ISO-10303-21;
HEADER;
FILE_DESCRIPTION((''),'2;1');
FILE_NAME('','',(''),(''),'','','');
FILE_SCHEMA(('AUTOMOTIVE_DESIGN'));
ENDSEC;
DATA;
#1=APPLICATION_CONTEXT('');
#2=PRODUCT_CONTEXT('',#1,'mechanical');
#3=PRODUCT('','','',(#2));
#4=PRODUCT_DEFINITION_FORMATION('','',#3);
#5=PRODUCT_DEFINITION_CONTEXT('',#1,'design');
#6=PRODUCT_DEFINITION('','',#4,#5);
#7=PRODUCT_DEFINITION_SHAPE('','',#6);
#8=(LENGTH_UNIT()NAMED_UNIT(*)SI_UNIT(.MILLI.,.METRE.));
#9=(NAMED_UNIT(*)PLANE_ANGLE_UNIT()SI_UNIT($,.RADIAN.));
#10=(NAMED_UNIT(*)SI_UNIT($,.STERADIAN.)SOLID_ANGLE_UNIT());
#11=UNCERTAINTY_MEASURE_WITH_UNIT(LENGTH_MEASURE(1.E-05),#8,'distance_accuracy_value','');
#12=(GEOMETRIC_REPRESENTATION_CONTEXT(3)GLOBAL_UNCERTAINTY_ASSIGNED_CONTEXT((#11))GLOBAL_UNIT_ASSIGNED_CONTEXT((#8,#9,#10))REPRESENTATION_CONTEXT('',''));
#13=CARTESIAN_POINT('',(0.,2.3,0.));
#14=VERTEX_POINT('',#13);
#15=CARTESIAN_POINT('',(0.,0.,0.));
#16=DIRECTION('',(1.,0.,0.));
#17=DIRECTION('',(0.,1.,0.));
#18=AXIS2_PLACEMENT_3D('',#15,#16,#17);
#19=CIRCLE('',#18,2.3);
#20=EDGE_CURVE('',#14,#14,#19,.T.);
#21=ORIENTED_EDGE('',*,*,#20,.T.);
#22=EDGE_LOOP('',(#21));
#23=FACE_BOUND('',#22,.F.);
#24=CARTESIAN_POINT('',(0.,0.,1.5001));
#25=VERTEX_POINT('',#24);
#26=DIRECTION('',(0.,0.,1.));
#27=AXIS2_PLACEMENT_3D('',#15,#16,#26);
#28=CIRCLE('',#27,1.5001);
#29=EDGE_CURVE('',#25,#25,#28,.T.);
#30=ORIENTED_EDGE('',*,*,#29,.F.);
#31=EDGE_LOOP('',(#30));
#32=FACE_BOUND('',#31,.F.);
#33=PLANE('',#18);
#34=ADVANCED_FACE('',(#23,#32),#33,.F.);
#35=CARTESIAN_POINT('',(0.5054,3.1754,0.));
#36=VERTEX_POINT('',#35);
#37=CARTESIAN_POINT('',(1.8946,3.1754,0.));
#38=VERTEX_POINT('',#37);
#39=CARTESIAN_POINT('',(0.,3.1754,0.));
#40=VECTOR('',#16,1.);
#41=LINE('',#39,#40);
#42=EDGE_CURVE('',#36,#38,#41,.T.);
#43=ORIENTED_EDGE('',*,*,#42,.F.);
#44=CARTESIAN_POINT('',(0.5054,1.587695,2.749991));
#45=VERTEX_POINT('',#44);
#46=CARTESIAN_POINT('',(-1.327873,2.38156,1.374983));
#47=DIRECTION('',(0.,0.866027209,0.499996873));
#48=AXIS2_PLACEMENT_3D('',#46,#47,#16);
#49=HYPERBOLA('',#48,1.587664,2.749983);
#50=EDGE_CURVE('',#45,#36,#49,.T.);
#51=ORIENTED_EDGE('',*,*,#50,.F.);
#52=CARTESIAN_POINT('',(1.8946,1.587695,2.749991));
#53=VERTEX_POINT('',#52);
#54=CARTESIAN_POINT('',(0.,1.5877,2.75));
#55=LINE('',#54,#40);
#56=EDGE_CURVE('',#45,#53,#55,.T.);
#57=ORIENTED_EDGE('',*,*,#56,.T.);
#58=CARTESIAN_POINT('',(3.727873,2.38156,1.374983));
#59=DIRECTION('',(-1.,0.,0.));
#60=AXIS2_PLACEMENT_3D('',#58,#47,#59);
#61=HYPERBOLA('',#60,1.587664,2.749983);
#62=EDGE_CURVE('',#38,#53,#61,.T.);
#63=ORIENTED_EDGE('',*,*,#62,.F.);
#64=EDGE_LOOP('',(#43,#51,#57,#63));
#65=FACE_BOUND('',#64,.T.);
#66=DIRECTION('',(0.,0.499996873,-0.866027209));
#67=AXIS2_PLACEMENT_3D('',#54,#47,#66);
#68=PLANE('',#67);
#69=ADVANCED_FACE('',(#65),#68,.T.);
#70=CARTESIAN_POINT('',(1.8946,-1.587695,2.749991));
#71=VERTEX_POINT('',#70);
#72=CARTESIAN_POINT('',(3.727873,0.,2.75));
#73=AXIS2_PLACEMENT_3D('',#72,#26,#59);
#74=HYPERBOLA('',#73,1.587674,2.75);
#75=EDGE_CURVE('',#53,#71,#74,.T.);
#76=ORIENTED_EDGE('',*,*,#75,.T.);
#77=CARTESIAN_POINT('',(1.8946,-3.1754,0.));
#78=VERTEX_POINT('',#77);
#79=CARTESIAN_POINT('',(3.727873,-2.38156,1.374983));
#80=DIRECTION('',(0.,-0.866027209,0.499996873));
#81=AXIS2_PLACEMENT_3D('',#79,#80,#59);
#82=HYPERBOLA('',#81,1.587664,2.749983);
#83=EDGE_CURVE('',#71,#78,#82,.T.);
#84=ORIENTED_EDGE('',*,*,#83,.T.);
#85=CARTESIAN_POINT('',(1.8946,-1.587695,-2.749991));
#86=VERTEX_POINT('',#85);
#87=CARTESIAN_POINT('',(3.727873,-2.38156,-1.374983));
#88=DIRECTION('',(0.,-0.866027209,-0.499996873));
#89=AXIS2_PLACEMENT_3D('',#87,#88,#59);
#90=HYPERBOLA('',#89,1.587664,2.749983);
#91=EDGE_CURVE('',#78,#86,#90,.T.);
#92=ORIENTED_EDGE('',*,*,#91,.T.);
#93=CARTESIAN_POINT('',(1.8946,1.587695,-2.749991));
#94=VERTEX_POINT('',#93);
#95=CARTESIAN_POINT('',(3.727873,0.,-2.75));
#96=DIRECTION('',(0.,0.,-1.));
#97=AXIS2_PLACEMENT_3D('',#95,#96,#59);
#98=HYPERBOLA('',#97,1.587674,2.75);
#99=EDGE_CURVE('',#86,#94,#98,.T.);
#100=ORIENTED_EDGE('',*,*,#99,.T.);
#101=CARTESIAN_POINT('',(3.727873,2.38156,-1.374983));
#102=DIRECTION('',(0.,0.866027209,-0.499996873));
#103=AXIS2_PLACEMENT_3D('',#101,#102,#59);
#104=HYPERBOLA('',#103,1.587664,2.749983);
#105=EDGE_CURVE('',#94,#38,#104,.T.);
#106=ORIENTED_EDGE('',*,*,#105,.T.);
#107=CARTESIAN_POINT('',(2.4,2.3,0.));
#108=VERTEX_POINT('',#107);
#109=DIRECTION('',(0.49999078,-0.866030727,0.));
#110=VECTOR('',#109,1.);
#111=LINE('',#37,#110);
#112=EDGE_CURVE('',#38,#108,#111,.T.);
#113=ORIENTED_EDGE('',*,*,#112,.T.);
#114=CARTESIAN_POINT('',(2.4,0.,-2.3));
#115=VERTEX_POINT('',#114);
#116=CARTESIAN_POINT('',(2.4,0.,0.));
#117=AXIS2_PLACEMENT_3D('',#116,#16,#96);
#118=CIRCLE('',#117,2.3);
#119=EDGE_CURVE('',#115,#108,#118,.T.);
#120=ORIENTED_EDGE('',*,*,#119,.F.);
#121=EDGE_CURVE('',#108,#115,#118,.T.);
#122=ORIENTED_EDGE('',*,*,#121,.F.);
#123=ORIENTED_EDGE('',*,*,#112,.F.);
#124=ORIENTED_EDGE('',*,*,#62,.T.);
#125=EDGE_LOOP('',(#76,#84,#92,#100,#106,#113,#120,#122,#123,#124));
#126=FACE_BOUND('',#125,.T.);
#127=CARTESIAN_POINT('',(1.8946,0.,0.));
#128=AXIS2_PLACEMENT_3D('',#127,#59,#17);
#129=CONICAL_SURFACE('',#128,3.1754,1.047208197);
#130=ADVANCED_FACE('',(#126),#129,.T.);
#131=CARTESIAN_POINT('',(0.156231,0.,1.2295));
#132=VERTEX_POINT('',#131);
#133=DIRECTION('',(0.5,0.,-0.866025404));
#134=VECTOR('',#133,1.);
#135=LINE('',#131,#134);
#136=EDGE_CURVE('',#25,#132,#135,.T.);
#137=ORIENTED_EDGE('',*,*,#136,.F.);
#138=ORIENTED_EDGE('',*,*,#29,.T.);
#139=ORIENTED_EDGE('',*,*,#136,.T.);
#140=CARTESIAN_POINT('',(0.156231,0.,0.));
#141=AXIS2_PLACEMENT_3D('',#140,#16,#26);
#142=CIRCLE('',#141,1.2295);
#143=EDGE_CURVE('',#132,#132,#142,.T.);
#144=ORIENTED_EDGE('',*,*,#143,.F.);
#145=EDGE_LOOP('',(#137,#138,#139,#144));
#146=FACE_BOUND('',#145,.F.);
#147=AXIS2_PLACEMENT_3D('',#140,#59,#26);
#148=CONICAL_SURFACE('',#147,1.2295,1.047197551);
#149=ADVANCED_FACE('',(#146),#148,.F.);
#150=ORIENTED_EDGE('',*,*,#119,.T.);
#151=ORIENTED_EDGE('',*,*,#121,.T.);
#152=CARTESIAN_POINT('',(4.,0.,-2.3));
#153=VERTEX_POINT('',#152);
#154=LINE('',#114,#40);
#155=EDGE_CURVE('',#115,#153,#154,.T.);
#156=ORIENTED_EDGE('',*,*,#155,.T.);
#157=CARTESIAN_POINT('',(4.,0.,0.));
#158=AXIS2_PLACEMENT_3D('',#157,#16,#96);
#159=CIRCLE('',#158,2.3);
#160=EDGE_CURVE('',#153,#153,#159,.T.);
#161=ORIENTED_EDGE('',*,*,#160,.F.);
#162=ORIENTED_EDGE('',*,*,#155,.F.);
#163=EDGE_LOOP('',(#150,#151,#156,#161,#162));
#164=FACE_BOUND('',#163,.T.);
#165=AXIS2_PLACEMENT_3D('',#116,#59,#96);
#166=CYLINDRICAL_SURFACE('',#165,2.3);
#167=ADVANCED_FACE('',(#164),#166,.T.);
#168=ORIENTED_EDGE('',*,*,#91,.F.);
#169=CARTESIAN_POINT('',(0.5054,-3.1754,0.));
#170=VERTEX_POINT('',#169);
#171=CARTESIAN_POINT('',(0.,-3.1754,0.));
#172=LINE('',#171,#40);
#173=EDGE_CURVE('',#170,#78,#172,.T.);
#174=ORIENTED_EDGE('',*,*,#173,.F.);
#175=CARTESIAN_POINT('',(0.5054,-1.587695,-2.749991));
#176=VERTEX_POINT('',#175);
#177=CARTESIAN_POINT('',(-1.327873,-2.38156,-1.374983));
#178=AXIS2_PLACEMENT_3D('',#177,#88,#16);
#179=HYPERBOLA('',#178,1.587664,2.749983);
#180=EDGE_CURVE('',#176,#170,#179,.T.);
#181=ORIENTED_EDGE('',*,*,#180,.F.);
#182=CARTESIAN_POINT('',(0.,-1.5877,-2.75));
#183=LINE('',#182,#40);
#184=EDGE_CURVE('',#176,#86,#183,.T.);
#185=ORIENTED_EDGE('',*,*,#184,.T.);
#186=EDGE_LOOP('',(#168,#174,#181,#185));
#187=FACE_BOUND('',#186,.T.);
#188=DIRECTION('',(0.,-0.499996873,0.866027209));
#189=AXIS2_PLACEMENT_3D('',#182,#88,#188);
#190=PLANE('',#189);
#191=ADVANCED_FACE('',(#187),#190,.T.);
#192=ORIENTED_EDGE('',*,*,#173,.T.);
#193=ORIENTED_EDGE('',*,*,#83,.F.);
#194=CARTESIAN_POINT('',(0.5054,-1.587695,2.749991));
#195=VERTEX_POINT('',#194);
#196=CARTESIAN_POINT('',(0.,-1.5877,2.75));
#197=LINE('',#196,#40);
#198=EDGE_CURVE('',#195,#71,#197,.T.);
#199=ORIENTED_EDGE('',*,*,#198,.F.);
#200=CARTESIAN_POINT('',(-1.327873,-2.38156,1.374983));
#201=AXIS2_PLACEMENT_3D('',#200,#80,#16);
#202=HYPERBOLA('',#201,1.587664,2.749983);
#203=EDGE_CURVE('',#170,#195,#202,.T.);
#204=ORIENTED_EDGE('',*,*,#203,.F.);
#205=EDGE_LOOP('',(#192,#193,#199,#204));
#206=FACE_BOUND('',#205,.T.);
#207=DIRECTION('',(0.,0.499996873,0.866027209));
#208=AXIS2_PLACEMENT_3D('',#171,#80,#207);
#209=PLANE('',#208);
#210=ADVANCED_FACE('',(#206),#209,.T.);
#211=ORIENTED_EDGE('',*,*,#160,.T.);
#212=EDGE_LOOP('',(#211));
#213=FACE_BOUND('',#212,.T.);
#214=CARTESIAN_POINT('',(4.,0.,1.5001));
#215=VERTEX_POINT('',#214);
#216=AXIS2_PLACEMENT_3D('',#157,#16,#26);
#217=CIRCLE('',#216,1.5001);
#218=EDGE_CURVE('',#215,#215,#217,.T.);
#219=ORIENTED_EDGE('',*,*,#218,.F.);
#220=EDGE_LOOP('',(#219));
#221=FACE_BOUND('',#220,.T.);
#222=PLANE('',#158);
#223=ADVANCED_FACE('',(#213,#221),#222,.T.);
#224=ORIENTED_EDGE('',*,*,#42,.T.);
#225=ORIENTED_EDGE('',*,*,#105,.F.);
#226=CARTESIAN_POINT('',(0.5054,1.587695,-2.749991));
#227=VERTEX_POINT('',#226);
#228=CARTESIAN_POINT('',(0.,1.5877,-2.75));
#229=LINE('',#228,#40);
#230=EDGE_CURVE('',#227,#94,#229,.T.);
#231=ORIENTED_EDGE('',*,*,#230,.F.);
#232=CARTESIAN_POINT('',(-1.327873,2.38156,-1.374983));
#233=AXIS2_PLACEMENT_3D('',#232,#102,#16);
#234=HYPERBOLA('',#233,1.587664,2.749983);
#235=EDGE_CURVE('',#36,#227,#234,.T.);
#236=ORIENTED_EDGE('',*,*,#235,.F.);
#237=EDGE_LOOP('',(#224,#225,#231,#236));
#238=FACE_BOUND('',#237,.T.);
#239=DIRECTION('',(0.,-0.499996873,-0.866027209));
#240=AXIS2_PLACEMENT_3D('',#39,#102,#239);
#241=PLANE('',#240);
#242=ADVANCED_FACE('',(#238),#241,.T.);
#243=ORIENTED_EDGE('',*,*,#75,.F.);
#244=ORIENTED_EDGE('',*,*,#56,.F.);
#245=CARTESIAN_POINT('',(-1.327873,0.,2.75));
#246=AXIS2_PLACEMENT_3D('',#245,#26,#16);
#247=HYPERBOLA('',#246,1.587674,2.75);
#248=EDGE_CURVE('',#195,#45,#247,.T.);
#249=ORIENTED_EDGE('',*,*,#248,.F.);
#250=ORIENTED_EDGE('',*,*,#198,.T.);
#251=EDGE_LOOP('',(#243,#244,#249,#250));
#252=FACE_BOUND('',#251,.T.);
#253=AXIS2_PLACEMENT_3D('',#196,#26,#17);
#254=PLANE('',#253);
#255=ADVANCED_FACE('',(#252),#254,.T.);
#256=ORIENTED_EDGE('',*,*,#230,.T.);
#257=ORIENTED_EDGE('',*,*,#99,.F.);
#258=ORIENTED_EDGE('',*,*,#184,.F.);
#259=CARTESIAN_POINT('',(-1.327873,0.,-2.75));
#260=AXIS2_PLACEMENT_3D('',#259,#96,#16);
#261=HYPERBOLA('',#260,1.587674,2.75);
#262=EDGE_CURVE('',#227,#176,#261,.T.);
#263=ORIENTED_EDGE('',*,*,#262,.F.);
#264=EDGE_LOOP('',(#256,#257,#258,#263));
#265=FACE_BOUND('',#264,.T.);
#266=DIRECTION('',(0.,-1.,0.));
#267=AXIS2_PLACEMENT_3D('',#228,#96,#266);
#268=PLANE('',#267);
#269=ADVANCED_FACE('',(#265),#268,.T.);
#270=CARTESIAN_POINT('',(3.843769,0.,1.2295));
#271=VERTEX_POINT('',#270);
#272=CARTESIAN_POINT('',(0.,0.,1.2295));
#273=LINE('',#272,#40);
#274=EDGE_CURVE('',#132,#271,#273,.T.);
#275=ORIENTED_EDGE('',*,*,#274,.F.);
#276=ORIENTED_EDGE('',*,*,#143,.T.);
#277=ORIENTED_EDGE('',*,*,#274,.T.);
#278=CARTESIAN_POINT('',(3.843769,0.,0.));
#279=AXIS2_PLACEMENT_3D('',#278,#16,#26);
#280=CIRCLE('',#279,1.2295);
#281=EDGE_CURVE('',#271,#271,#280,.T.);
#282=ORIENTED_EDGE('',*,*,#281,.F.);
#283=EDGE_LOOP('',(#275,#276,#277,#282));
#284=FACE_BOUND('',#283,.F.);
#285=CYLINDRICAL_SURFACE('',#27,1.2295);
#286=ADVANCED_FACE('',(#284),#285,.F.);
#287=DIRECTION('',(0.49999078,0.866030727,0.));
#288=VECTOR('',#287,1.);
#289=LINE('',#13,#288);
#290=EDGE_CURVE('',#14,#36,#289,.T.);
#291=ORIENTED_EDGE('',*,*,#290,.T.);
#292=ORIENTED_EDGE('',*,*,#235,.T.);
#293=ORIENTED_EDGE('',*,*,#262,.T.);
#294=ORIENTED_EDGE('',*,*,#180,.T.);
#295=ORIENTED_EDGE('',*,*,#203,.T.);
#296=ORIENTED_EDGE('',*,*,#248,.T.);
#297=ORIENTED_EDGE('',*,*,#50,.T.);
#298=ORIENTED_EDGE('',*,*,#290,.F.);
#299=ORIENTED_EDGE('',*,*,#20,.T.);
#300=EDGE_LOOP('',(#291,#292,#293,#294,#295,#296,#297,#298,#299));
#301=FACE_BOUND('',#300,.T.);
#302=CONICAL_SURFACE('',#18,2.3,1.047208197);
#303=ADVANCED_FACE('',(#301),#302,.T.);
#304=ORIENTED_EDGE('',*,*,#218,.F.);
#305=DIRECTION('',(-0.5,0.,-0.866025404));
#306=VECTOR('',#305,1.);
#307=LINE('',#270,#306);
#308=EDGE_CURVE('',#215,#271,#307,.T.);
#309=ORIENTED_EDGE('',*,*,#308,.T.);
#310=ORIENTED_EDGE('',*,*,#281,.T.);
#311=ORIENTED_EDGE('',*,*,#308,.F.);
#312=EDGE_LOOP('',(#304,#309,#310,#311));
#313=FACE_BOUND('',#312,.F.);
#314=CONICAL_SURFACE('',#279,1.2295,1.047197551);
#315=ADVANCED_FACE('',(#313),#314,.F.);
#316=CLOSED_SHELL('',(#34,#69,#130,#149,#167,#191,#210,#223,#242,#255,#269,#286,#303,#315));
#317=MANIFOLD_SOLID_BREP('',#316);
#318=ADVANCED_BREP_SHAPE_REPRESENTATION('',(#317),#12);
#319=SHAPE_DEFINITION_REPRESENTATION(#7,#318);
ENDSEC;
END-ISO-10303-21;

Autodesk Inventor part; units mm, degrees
ref_plane "YZ Plane" through (0, 0, 0) normal (1, 0, 0) x (0, 1, 0)
ref_plane "XZ Plane" through (0, 0, 0) normal (0, 1, 0) x (-1, 0, 0)
sketch "Sketch1" plane through (0, 0, 0) normal (1, 0, 0) x (0, 1, 0)
  line L0 (1.5877, -2.75) -> (-1.5877, -2.75)
  line L1 (-1.5877, -2.75) -> (-3.1754, 0)
  line L2 (-3.1754, 0) -> (-1.5877, 2.75)
  line L3 (-1.5877, 2.75) -> (1.5877, 2.75)
  line L4 (1.5877, 2.75) -> (3.1754, 0)
  line L5 (3.1754, 0) -> (1.5877, -2.75)
  point P0 (0, 0)
  point P1 (0, 0)
  dimension "d0" = 6.3509
extrude "Body" add sketch "Sketch1" along normal blind 2.4
sketch "Sketch2" plane through (2.4, 0, 0) normal (1, 0, 0) x (0, 0, -1)
  circle A0 centre (0, 0) radius 2.3
  dimension "d7" = 4.6
extrude "Ring" add sketch "Sketch2" along normal blind 1.6
sketch "Sketch3" plane through (0, 0, 0) normal (0, 0, 1) x (1, 0, 0)
  line L0 (0, 1.5877) -> (0, 3.1754) projected
  line L1 (0, 3.1754) -> (2.4, 3.1754) projected
  line L2 (2.4, 1.5877) -> (2.4, 3.1754) projected
  line L3 (-0.48, 0) -> (2.88, 0) projected
  line L4 (0, 2.3) -> (0.5054, 3.1754)
  line L5 (1.8946, 3.1754) -> (2.4, 2.3)
  dimension "d3" = 30
  dimension "d4" = 30
  dimension "d5" = 4.6
  dimension "d6" = 4.6
revolve "Chamfer1" cut sketch "Sketch3" angle 360 about axis through (-10, 0, 0) along (1, 0, 0)
sketch "Sketch4" plane through (0, 0, 0) normal (-1, 0, 0) x (0, 0, 1)
  line L0 (0, -4.4456) -> (0, 4.4456) projected
  line L1 (-3.85, 0) -> (3.85, 0) projected
  point P0 (0, 0)
hole "Thread" at (0, 0, 0) direction (1, 0, 0) diameter 2.459 end through all thread size "M3x0.5" class "6H" standard "ISO Metric profile"
chamfer "Chamfer2" distance 0.2706 angle 30 1 edges at (0, 0, -1.2295) measured on face at (0, 1.9179, -0.2329)
chamfer "Chamfer3" distance 0.2706 angle 30 1 edges at (4, 0, -1.2295) measured on face at (4, -0.2816, -1.909)
ref_plane "Work Plane1" through (9.305, 0, 0) normal (0, 0, 1) x (-1, 0, 0)
equation "\"d0\" = 1.1547 * SW"
equation "\"d1\" = KOH1"
equation "\"d7\" = SD2"
equation "\"d8\" = KOH - KOH1"
equation "\"d3\" = ANG1"
equation "\"d4\" = ANG2"
equation "\"d5\" = SW0"
equation "\"d6\" = SW01"
equation "\"d10\" = -0.5 * GD1 + 0.5 * NND"
equation "\"d46\" = -0.5 * GD1 + 0.5 * NND"
equation "\"d12\" = -0.5 * GD1 + 0.5 * NND"
equation "\"d47\" = -0.5 * GD1 + 0.5 * NND"
equation "\"ANG1\" = 30deg"
equation "\"ANG2\" = 30deg"
equation "\"NND\" = 3"
equation "\"KOH1\" = 2.4"
equation "\"KOH\" = 4"
equation "\"SW\" = 5.5"
equation "\"SW0\" = 4.6"
equation "\"SW01\" = SW0"
equation "\"SD2\" = SW0"
equation "\"GUL\" = 0.541266 * PTC"
equation "\"THREADDIA\" = 3"
equation "\"TOA\" = 30deg"
equation "\"PTC\" = 0.5"
equation "\"GAL\" = 0.541266 * PTC"
equation "\"E0\" = 1.155 * SW"
equation "\"GD1\" = 2.458734"
properties part number "DIN 985 - M3" material "Steel, Mild"
